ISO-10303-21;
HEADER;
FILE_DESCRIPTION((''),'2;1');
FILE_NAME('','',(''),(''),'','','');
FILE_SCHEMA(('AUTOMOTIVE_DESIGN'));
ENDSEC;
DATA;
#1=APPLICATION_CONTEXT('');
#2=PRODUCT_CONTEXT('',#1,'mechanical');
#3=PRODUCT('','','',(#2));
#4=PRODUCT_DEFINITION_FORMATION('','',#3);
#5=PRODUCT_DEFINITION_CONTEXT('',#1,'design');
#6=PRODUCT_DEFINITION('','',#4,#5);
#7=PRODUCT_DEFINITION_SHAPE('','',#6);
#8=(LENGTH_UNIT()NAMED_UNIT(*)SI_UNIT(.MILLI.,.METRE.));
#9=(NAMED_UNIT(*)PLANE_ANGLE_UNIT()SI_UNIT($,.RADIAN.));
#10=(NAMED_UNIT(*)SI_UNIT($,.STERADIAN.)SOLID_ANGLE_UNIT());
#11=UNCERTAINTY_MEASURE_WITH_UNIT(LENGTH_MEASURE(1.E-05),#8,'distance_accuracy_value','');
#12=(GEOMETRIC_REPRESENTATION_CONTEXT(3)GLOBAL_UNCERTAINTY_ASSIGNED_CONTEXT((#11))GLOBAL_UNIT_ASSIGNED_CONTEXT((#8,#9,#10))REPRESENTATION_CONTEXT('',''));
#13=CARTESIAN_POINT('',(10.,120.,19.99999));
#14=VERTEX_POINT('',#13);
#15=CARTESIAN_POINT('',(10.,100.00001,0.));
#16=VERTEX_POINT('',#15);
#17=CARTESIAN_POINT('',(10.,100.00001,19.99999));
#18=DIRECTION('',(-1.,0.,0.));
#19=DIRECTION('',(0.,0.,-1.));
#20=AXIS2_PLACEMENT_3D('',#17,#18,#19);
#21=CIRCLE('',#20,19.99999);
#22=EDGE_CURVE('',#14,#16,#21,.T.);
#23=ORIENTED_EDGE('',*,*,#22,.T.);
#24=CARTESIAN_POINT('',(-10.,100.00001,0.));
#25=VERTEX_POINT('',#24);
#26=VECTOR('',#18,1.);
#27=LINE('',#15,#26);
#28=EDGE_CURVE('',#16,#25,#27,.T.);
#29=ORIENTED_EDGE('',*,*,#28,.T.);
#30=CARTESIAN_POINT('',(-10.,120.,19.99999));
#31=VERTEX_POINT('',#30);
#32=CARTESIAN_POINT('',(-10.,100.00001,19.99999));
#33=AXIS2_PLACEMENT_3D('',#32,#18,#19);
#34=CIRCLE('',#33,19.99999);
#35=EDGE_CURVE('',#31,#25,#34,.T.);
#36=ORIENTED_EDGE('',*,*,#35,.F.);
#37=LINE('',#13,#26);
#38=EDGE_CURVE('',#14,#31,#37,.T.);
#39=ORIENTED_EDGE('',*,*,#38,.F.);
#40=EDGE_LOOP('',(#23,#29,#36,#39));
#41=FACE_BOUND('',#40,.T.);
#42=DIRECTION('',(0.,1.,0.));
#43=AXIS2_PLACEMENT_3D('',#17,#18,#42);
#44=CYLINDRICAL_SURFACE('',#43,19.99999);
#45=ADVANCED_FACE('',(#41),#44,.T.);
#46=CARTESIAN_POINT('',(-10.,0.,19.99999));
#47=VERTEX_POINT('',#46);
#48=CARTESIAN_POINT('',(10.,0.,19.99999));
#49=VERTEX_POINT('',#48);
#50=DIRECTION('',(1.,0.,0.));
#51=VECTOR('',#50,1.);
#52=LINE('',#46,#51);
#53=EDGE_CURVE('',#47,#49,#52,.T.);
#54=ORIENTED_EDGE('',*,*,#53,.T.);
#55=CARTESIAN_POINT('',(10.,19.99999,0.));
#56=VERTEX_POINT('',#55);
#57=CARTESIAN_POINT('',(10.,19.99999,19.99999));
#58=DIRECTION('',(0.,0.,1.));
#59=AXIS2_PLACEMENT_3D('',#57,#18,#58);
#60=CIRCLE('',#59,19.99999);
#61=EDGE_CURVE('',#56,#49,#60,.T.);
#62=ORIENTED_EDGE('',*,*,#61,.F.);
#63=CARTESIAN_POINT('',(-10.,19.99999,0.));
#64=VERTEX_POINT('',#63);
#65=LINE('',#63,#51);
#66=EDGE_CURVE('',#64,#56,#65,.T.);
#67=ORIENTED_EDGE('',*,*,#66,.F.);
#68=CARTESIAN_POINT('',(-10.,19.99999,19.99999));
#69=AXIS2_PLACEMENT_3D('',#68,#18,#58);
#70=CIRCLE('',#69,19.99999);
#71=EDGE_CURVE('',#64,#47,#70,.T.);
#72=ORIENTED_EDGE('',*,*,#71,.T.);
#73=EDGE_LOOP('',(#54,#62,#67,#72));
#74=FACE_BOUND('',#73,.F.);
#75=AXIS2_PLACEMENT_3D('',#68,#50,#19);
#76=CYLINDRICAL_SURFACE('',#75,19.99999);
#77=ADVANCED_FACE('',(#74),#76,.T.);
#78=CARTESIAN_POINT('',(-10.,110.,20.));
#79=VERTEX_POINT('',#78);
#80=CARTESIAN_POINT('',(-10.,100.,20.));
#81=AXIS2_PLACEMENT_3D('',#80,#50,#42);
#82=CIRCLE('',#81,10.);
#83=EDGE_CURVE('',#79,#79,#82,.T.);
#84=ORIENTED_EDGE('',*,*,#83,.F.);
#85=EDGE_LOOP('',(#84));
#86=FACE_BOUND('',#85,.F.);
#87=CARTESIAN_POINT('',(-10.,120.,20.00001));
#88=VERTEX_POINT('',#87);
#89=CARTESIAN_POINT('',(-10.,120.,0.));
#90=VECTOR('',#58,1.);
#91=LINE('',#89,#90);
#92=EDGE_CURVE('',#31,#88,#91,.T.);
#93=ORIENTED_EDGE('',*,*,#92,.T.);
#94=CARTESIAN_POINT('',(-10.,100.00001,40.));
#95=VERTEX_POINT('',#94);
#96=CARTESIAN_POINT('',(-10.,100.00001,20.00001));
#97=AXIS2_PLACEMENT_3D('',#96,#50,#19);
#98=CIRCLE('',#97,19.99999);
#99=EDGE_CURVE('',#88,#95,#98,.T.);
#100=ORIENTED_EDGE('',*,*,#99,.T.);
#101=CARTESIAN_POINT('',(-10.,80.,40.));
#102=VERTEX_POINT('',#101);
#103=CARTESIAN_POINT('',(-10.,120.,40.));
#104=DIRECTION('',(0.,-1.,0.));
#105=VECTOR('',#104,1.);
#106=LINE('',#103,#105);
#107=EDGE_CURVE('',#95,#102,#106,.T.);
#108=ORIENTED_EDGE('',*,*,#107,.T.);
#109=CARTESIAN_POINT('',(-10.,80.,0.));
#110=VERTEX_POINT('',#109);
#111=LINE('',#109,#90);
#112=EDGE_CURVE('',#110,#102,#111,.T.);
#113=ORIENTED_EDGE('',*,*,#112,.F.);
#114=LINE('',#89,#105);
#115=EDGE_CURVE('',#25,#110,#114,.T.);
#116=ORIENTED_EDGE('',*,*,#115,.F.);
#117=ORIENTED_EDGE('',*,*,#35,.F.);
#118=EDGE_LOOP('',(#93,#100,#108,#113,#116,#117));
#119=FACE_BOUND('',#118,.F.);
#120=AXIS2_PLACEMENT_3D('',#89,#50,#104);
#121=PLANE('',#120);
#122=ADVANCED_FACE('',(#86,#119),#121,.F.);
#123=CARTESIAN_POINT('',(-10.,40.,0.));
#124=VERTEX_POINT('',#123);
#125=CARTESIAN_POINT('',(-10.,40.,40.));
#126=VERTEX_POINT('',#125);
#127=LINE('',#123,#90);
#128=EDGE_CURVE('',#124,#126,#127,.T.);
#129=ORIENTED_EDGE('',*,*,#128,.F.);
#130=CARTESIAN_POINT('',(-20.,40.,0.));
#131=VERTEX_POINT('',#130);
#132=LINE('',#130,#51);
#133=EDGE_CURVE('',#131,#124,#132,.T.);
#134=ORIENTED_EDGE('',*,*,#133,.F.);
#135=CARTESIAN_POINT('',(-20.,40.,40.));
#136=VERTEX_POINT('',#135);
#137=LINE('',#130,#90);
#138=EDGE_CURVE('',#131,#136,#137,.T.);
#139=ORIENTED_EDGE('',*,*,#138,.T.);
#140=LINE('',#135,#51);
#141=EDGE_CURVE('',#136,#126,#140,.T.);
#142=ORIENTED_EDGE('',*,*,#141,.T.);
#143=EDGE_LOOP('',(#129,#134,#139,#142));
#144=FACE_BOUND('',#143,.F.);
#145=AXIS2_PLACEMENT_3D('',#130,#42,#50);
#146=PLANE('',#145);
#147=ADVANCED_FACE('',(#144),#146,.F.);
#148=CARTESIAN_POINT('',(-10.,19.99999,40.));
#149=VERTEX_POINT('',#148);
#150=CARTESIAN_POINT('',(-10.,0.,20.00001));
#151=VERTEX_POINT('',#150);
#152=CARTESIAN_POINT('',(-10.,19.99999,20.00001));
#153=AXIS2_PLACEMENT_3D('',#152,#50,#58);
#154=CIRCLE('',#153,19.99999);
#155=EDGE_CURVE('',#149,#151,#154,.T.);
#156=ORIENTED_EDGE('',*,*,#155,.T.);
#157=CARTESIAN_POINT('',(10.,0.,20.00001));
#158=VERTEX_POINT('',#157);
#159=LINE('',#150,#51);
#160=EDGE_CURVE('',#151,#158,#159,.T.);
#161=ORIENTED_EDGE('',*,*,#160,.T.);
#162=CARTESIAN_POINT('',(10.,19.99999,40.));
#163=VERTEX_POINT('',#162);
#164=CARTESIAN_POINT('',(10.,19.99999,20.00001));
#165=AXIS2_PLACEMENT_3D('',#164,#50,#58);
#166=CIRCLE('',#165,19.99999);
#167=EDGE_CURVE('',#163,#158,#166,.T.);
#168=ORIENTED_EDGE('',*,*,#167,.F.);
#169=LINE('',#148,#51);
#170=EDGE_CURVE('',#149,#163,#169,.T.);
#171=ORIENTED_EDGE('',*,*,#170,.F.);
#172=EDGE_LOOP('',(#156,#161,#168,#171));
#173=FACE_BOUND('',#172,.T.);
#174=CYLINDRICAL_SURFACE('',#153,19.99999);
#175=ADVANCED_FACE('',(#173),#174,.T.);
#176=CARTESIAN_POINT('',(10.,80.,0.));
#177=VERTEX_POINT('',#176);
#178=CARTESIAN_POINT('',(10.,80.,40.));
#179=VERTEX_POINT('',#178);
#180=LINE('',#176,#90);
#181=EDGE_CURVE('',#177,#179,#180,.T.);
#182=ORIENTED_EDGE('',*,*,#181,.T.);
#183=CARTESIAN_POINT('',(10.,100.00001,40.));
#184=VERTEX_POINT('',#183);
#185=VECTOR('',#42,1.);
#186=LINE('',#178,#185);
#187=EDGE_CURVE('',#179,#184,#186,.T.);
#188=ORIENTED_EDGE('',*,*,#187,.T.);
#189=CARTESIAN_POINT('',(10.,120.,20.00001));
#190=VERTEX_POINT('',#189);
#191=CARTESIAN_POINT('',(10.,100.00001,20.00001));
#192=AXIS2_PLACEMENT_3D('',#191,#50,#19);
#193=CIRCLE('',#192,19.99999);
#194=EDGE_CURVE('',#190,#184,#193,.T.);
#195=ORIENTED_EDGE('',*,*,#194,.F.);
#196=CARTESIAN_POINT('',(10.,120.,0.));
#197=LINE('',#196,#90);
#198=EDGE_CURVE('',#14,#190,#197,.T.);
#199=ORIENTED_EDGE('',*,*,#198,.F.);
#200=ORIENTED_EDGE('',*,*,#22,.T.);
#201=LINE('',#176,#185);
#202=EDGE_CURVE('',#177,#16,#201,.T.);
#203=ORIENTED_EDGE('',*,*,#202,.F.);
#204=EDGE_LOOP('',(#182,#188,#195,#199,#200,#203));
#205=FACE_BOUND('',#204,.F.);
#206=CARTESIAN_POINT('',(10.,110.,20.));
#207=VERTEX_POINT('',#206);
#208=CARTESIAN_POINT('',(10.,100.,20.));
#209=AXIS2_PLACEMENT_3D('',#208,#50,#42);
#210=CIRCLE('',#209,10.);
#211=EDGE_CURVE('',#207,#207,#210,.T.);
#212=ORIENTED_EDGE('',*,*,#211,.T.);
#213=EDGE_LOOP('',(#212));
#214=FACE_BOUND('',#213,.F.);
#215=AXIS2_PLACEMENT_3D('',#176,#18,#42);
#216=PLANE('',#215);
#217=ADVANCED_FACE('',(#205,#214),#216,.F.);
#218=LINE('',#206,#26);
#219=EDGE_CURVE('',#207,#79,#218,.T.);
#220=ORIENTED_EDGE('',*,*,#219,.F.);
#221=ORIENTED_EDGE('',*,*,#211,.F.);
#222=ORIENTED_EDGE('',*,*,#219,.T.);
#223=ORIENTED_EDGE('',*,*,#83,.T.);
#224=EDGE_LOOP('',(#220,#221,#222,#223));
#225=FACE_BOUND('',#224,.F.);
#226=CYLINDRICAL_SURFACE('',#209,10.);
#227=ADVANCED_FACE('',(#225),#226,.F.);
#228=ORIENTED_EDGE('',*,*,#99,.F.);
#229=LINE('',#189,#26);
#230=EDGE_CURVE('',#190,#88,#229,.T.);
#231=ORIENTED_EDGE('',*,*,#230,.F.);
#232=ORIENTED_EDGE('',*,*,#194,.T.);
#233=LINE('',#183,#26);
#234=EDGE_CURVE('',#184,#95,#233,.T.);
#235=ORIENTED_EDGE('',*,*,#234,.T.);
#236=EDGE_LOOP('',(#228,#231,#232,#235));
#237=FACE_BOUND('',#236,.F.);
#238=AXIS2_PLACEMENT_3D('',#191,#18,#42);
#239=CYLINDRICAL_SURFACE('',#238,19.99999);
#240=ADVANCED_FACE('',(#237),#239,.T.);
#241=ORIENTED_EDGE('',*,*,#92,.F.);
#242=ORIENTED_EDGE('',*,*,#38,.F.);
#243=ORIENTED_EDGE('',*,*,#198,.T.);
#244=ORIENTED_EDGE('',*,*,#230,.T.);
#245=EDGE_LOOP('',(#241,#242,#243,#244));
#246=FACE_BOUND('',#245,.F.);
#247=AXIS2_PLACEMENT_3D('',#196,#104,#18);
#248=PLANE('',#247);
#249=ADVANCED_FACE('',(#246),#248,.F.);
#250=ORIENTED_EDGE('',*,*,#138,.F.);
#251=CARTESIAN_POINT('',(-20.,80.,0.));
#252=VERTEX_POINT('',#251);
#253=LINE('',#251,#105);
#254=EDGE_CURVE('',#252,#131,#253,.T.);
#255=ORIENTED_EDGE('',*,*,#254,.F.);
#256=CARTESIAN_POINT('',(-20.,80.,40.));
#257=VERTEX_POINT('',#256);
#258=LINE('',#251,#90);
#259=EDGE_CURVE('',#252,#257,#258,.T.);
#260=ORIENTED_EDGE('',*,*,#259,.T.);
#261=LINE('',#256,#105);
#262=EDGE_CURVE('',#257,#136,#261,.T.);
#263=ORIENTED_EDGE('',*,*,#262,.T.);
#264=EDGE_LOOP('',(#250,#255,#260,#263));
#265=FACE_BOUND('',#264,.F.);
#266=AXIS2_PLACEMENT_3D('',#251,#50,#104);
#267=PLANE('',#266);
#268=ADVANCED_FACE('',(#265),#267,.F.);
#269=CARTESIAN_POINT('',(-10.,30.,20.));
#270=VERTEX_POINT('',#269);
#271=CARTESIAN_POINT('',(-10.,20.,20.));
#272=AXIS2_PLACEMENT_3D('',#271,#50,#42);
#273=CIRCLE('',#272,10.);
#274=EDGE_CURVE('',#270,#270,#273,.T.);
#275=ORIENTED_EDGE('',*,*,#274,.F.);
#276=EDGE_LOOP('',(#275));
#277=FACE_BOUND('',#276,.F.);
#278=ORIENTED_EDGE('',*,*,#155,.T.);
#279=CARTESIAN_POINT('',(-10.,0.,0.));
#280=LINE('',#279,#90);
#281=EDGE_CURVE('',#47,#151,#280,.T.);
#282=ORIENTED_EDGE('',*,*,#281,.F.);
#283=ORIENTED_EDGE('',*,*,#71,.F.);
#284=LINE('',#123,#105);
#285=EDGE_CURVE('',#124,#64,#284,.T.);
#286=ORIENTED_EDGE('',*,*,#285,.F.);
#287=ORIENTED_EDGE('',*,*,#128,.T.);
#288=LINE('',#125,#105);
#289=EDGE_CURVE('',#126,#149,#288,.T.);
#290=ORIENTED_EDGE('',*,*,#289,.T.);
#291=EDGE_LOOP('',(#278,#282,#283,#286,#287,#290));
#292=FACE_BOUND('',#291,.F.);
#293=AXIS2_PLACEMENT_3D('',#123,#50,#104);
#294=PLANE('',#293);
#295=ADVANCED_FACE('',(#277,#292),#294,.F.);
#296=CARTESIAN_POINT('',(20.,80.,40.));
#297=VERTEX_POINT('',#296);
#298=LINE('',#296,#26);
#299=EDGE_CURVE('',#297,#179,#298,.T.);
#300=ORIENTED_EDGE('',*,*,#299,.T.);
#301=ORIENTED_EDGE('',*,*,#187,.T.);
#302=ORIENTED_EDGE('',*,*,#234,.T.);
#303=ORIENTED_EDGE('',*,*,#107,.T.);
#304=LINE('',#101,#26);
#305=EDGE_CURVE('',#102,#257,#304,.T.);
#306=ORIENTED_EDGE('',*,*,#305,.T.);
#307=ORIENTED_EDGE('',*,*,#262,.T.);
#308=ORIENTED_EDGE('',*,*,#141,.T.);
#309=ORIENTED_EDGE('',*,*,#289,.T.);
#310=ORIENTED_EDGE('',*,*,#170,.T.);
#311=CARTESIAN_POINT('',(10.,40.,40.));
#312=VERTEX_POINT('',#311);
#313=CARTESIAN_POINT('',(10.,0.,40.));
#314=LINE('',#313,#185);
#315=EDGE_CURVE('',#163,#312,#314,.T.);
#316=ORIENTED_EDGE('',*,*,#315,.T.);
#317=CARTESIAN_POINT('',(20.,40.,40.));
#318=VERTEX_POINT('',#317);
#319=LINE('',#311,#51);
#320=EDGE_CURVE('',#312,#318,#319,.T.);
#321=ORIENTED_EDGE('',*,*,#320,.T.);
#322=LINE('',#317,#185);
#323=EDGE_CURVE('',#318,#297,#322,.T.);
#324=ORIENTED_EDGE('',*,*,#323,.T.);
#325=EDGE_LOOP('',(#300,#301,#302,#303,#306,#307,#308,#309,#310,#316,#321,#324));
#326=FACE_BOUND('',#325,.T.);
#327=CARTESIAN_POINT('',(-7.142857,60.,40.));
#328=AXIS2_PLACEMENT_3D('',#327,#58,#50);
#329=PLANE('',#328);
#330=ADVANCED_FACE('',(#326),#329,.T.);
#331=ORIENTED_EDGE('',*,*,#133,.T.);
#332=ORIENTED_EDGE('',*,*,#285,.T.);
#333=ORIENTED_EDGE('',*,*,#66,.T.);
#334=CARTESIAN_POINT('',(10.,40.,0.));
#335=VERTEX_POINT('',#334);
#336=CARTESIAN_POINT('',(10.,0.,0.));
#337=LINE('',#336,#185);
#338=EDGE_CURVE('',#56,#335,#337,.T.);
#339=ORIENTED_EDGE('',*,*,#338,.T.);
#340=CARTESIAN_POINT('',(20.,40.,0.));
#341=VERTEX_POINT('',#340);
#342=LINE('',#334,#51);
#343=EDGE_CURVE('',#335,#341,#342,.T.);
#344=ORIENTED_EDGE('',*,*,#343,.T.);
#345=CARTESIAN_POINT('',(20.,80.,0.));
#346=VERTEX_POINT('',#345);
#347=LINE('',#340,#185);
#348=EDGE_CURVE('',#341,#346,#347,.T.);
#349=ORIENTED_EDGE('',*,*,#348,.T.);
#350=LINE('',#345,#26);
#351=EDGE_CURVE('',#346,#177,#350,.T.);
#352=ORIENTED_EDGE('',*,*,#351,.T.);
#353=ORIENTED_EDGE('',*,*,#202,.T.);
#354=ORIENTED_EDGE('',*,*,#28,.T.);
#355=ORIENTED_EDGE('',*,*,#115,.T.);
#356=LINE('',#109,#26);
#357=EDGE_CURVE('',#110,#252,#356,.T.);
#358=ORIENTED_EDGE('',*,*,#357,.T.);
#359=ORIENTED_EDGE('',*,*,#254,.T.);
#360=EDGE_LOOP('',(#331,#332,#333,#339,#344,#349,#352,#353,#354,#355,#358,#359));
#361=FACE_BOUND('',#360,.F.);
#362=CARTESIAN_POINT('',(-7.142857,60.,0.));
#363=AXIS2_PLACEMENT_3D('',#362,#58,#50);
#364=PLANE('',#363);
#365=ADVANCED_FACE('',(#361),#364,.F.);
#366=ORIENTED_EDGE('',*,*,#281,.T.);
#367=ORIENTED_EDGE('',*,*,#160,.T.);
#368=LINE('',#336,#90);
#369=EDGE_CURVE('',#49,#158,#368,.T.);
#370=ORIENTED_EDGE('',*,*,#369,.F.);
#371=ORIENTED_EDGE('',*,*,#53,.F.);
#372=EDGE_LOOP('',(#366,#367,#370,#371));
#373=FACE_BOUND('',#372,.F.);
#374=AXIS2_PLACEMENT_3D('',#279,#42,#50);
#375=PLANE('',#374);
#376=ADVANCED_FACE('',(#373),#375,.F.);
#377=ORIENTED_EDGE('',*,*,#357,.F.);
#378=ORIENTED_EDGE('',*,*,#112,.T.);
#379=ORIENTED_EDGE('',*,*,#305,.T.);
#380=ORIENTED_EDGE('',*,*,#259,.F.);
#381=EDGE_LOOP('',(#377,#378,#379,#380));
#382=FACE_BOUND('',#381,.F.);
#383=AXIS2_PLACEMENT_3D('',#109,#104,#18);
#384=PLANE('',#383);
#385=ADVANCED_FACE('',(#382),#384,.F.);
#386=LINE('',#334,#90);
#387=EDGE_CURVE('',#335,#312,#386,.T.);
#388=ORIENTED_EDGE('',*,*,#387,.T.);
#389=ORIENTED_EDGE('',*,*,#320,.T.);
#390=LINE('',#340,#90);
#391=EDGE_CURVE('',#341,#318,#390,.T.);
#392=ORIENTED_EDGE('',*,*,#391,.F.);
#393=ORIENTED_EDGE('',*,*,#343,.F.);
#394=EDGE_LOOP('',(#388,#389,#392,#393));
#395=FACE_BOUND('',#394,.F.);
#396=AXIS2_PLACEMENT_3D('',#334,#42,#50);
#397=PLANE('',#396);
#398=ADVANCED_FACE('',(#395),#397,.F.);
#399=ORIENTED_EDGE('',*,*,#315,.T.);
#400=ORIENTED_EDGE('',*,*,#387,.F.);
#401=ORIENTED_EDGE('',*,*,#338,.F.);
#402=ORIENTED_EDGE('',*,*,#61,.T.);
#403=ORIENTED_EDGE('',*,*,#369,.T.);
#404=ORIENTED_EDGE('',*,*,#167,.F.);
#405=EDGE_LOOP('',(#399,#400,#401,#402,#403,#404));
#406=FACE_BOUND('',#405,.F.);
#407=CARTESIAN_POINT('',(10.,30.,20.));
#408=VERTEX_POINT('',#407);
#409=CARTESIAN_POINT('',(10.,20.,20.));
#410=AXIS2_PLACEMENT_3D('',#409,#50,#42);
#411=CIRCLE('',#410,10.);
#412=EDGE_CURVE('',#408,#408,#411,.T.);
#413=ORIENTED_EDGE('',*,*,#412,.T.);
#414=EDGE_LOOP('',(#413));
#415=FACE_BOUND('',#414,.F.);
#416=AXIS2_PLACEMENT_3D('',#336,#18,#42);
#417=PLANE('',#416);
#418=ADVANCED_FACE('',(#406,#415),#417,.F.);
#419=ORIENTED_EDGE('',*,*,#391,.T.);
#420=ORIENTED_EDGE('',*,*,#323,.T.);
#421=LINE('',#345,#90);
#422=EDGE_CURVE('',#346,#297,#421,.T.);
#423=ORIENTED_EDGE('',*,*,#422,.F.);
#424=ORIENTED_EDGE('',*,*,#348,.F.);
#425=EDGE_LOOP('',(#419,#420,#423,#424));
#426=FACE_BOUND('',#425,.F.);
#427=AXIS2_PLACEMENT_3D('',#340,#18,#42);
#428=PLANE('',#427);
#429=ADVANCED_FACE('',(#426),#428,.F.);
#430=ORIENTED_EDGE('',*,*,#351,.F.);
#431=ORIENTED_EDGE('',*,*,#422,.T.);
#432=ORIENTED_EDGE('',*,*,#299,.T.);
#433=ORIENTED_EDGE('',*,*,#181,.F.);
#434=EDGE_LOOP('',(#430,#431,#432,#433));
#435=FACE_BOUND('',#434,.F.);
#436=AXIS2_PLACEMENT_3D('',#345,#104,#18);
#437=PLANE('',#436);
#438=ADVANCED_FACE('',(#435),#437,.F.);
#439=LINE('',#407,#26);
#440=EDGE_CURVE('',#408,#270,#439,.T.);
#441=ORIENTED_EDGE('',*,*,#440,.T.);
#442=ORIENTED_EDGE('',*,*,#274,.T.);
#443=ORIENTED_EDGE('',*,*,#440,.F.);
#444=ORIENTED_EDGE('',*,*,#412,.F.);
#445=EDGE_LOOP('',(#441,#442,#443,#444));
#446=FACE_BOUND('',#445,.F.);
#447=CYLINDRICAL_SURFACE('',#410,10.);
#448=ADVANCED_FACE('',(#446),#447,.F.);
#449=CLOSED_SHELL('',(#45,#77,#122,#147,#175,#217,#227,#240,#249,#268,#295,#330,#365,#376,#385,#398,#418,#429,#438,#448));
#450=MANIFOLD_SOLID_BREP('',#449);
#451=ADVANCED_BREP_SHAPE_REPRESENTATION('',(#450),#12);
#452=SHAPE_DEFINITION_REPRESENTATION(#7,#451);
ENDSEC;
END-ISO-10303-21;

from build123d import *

# Parameters (mm, degrees)
F1_DEPTH = 40
F2_R     = 10
F3_DEPTH = 20
F4_R     = 10
F5_DEPTH = 20
F6_R     = 19.99999
F7_R     = 19.99999


# Not quite as in the source:
# - a fillet or chamfer is up to 0.001 mm smaller than in the source, because OpenCascade refuses the exact size


with BuildPart() as f1:
    # F0 (on Top) → F1 (new body)
    with BuildSketch(Plane.XY):
        Polygon((0, 0), (0, 120), (-10, 120), (-10, 80), (-20, 80), (-20, 40), (-10, 40), (-10, 0), align=None)
        Polygon((10, 120), (0, 120), (0, 0), (10, 0), (10, 40), (20, 40), (20, 80), (10, 80), align=None)
    extrude(amount=F1_DEPTH)

    # F2 (on face) → F3 (cut, through all)
    with BuildSketch(Plane.YZ.offset(10)):
        with Locations((20, 20)):
            Circle(F2_R)
    extrude(amount=-F3_DEPTH, mode=Mode.SUBTRACT)

    # F4 (on face) → F5 (cut, through all)
    with BuildSketch(Plane.YZ.offset(10)):
        with Locations((100, 20)):
            Circle(F4_R)
    extrude(amount=-F5_DEPTH, mode=Mode.SUBTRACT)

    # F6 (radius 20 in the source; OpenCascade refuses exactly that, so slightly less here)
    f6_edges = [f1.edges().sort_by_distance(p)[0] for p in [
        (0, 120, 0),
        (0, 120, 40),
    ]]
    fillet(f6_edges, radius=F6_R)

    # F7 (radius 20 in the source; OpenCascade refuses exactly that, so slightly less here)
    f7_edges = [f1.edges().sort_by_distance(p)[0] for p in [
        (0, 0, 40),
        (0, 0, 0),
    ]]
    fillet(f7_edges, radius=F7_R)


solid = f1.part
